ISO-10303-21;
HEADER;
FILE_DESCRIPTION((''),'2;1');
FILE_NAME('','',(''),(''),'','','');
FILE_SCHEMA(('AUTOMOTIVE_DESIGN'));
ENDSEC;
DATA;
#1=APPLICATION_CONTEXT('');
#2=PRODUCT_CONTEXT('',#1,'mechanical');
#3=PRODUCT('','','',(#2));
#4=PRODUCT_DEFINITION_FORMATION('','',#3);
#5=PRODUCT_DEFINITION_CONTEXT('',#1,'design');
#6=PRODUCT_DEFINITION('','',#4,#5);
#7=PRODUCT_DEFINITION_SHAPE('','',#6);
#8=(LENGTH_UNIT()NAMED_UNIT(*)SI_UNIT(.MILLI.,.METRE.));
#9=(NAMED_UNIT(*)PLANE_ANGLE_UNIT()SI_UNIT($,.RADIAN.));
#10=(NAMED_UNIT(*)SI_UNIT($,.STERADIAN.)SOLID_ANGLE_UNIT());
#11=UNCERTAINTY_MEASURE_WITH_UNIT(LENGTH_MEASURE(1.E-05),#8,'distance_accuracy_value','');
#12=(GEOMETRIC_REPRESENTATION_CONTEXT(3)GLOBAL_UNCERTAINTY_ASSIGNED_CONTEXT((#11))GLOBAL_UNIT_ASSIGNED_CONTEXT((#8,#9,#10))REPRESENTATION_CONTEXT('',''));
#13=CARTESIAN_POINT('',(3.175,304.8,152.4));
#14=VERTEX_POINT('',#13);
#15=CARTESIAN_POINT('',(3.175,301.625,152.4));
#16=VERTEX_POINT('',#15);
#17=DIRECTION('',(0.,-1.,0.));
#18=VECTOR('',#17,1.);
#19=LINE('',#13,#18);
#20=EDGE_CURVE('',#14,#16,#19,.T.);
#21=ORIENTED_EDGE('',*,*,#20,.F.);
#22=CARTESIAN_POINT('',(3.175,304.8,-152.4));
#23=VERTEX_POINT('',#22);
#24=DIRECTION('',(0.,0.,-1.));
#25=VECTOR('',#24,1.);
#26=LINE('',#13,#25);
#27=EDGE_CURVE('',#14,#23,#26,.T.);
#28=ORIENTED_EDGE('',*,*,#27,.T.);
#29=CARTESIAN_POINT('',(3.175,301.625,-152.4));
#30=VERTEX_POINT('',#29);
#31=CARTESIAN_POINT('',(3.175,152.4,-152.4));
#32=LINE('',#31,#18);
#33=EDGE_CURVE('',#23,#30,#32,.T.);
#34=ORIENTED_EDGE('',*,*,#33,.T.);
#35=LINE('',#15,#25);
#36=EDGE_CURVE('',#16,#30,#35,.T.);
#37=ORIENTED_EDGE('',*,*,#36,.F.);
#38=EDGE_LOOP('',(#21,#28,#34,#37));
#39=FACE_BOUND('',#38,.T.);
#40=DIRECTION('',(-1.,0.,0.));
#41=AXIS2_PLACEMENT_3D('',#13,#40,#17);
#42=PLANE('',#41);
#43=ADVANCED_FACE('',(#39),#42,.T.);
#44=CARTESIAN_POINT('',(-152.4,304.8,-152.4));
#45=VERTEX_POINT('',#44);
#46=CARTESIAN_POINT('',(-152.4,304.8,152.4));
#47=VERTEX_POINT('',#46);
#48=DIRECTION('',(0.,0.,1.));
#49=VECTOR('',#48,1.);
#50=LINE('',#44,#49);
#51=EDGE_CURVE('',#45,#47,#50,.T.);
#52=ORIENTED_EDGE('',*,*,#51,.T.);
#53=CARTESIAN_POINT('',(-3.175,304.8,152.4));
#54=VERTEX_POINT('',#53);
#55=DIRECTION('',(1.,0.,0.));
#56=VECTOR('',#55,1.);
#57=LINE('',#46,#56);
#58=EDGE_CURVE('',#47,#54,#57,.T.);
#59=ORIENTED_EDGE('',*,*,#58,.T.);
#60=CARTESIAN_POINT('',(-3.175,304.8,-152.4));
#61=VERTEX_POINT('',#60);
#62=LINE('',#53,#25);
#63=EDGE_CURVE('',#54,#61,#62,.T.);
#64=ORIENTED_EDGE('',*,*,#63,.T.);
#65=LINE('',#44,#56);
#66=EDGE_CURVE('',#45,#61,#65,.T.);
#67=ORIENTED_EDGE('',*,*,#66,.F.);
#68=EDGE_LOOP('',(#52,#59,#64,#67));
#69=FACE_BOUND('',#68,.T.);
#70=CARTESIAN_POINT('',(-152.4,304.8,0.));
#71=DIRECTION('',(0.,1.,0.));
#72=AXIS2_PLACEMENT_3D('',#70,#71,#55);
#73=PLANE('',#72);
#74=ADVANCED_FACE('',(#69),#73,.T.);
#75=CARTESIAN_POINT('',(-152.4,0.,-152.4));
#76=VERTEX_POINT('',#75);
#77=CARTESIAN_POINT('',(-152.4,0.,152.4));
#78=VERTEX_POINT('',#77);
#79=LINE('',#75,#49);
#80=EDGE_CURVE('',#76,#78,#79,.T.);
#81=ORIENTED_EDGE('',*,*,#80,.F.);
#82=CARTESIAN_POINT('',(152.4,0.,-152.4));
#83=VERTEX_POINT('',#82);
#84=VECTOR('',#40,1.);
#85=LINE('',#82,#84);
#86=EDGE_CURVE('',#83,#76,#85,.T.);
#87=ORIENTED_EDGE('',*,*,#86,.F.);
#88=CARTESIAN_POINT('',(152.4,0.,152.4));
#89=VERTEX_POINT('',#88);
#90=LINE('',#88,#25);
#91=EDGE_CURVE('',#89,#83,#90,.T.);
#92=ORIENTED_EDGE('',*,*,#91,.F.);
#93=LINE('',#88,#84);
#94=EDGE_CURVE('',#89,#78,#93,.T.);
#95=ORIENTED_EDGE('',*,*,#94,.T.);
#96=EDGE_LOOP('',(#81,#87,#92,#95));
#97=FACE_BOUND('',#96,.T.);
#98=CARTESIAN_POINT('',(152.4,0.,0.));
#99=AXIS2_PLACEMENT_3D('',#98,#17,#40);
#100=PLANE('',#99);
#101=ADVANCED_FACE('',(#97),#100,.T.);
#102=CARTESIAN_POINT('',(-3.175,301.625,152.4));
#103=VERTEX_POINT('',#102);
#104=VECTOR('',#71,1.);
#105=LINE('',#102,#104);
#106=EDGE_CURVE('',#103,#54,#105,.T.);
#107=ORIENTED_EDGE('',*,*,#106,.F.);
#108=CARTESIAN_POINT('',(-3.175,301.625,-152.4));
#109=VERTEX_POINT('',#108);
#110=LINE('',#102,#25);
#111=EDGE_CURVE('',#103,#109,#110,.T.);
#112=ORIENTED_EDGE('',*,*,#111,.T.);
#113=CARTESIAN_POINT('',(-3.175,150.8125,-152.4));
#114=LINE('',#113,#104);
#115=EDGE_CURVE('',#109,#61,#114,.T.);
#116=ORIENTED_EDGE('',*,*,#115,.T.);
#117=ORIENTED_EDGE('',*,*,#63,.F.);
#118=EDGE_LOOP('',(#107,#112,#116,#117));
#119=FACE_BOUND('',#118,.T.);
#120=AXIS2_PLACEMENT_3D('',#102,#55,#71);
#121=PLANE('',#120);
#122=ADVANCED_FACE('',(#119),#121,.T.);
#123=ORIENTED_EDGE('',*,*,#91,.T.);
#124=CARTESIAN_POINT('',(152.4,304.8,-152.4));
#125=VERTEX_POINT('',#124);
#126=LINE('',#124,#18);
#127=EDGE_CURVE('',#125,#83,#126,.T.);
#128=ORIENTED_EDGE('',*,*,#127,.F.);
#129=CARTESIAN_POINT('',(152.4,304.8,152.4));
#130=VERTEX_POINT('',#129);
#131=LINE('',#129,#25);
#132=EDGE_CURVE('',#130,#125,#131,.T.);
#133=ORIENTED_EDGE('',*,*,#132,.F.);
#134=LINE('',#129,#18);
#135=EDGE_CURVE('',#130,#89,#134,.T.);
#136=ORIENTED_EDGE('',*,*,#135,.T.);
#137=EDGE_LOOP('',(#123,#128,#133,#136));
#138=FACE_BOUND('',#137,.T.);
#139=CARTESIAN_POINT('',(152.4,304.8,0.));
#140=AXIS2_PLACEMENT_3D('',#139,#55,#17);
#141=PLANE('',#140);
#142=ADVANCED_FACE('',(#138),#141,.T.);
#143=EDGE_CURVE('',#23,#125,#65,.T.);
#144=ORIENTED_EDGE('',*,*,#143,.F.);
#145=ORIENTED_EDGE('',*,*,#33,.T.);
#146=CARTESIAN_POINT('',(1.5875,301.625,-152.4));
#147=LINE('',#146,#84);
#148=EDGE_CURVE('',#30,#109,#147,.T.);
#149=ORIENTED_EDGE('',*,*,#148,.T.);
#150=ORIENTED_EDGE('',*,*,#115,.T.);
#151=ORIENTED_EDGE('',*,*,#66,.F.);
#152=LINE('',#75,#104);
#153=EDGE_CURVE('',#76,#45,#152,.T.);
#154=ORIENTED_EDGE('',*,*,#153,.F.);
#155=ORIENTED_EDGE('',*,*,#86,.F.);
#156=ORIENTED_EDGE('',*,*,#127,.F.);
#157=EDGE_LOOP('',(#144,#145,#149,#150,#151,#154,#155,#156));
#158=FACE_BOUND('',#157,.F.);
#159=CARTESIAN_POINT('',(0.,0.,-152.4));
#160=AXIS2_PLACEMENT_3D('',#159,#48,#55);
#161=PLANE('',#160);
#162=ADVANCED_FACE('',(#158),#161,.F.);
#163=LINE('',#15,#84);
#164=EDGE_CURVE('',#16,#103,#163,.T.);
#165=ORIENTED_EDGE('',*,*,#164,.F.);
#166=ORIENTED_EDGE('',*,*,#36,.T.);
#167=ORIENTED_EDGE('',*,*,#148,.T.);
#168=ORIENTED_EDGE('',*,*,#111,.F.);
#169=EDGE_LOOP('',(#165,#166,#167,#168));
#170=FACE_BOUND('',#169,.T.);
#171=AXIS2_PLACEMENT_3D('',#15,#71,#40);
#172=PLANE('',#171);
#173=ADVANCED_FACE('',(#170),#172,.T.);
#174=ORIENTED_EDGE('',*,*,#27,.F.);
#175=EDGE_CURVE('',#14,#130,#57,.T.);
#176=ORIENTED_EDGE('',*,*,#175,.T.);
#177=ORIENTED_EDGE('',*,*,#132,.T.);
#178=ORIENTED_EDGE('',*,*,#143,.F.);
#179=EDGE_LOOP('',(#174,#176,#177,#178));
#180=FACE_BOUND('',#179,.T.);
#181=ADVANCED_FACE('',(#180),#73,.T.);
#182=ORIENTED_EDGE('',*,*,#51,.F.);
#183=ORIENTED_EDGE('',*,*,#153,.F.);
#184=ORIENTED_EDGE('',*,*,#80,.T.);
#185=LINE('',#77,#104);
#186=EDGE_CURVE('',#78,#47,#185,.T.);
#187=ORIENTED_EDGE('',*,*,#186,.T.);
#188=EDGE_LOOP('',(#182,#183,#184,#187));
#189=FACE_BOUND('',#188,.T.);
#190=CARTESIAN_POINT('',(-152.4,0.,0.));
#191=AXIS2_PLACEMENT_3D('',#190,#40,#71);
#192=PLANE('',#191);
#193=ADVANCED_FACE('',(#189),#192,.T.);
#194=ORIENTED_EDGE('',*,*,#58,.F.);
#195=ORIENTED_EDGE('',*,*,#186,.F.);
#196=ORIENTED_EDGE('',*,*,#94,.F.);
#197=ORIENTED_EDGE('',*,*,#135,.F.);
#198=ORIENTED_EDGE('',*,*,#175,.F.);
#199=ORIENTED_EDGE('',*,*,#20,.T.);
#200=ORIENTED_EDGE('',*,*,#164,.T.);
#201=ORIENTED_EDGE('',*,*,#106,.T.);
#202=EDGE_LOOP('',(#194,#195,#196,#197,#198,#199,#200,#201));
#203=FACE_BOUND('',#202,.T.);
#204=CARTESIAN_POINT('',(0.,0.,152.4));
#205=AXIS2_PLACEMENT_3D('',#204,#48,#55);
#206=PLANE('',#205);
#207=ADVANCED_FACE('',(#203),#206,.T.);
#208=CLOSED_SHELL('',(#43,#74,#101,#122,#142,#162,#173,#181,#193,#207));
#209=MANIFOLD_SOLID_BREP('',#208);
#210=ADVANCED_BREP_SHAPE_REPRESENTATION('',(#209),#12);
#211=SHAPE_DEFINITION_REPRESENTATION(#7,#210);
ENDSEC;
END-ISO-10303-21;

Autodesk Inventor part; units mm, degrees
ref_plane "YZ Plane" through (0, 0, 0) normal (1, 0, 0) x (0, 1, 0)
ref_plane "XZ Plane" through (0, 0, 0) normal (0, 1, 0) x (-1, 0, 0)
ref_plane "XY Plane" through (0, 0, 0) normal (0, 0, 1) x (1, 0, 0)
sketch "Sketch1" plane through (0, 0, 0) normal (0, 0, 1) x (1, 0, 0)
  line L0 (-152.4, 304.8) -> (152.4, 304.8)
  line L1 (152.4, 304.8) -> (152.4, 0)
  line L2 (152.4, 0) -> (-152.4, 0)
  line L3 (-152.4, 0) -> (-152.4, 304.8)
  point P0 (0, 0)
  point P1 (0, 0)
extrude "Extrusion1" add sketch "Sketch1" along normal mid plane 304.8
sketch "Sketch2" plane through (0, 0, 152.4) normal (0, 0, 1) x (1, 0, 0)
  line L0 (-152.4, 304.8) -> (152.4, 304.8) projected
  line L1 (-3.175, 304.8) -> (3.175, 304.8)
  line L2 (3.175, 304.8) -> (3.175, 301.625)
  line L3 (3.175, 301.625) -> (-3.175, 301.625)
  line L4 (-3.175, 301.625) -> (-3.175, 304.8)
  point P0 (0, 0)
  point P1 (0, 304.8)
  dimension "d4" = 3.175
  dimension "d5" = 6.35
extrude "Extrusion2" cut sketch "Sketch2" against normal through all
sketch "Sketch3" plane through (0, 0, 152.4) normal (0, 0, 1) x (1, 0, 0)
  line L0 (-152.4, 0) -> (-152.4, 304.8) projected
  line L1 (152.4, 0) -> (-152.4, 0) projected
  line L2 (-127, 25.4) -> (-50.8, 25.4)
  line L3 (-50.8, 25.4) -> (-50.8, 101.6)
  line L4 (-50.8, 101.6) -> (-127, 101.6)
  line L5 (-127, 101.6) -> (-127, 25.4)
  line L6 (-123.825, 98.425) -> (-53.975, 98.425)
  line L7 (-53.975, 98.425) -> (-53.975, 28.575)
  line L8 (-53.975, 28.575) -> (-123.825, 28.575)
  line L9 (-123.825, 28.575) -> (-123.825, 98.425)
  line L10 (-38.1, 25.4) -> (38.1, 25.4)
  line L11 (38.1, 25.4) -> (38.1, 101.6)
  line L12 (38.1, 101.6) -> (-38.1, 101.6)
  line L13 (-38.1, 101.6) -> (-38.1, 25.4)
  line L14 (-34.925, 98.425) -> (34.925, 98.425)
  line L15 (34.925, 98.425) -> (34.925, 28.575)
  line L16 (34.925, 28.575) -> (-34.925, 28.575)
  line L17 (-34.925, 28.575) -> (-34.925, 98.425)
  line L18 (-127, 114.3) -> (-50.8, 114.3)
  line L19 (-50.8, 114.3) -> (-50.8, 190.5)
  line L20 (-50.8, 190.5) -> (-127, 190.5)
  line L21 (-127, 190.5) -> (-127, 114.3)
  line L22 (-123.825, 187.325) -> (-53.975, 187.325)
  line L23 (-53.975, 187.325) -> (-53.975, 117.475)
  line L24 (-53.975, 117.475) -> (-123.825, 117.475)
  line L25 (-123.825, 117.475) -> (-123.825, 187.325)
  line L26 (-38.1, 114.3) -> (38.1, 114.3)
  line L27 (38.1, 114.3) -> (38.1, 190.5)
  line L28 (38.1, 190.5) -> (-38.1, 190.5)
  line L29 (-38.1, 190.5) -> (-38.1, 114.3)
  line L30 (-34.925, 187.325) -> (34.925, 187.325)
  line L31 (34.925, 187.325) -> (34.925, 117.475)
  line L32 (34.925, 117.475) -> (-34.925, 117.475)
  line L33 (-34.925, 117.475) -> (-34.925, 187.325)
  point P0 (0, 0)
  dimension "d8" = 76.2
  dimension "d9" = 25.4
  dimension "d10" = 25.4
  dimension "d11" = 3.175
  dimension "d14" = 88.9
  dimension "d17" = 88.9
split_face "Split1"
split_face "Split2"
split_face "Split3"
split_face "Split4"
split_face "Split5"
split_face "Split6"
split_face "Split7"
split_face "Split8"
sketch "Sketch4" plane through (-123.825, 98.425, 152.4) normal (0, 0, 1) x (1, 0, 0)
  line L0 (0, 0) -> (69.85, 0) projected
  line L1 (0, -69.85) -> (0, 0) projected
  line L2 (69.85, -69.85) -> (0, -69.85) projected
  line L3 (19.0891, -57.15) -> (50.7609, -57.15)
  line L4 (50.7609, -57.15) -> (50.7609, -50.8)
  line L5 (19.0891, -50.8) -> (19.0891, -57.15)
  line L6 (38.1, -50.8) -> (38.1, -34.697)
  line L7 (31.75, -34.697) -> (31.75, -50.8)
  line L8 (19.6575, -12.7) -> (16.6521, -18.8843)
  line L9 (16.6521, -18.8843) -> (20.9342, -18.8843)
  line L10 (20.9342, -18.8843) -> (17.3368, -26.287)
  line L11 (22.15, -12.7) -> (20.3175, -16.4708)
  line L12 (20.3175, -16.4708) -> (24.6183, -16.4708)
  line L13 (24.6183, -16.4708) -> (18.9446, -28.1459)
  line L14 (12.7, -12.7) -> (19.6575, -12.7)
  line L15 (22.15, -12.7) -> (57.15, -12.7)
  arc A0 (12.7, -12.7) -> (17.3368, -26.287) centre (34.925, -12.7) ccw
  arc A1 (18.9446, -28.1459) -> (31.75, -34.697) centre (34.925, -12.7) ccw
  arc A2 (38.1, -34.697) -> (57.15, -12.7) centre (34.925, -12.7) ccw
  line L16 (50.7609, -50.8) -> (38.1, -50.8)
  line L17 (31.75, -50.8) -> (19.0891, -50.8)
  point P0 (123.825, -98.425)
  point P1 (34.925, -50.8)
  point P2 (34.925, -29.1715)
  point P3 (34.925, 0)
  dimension "d20" = 12.7
  dimension "d21" = 6.35
  dimension "d22" = 6.35
  dimension "d24" = 12.7
split_face "Split9"
split_face "Split10"
sketch "Sketch5" plane through (-34.925, 98.425, 152.4) normal (0, 0, 1) x (1, 0, 0)
  line L0 (69.85, 0) -> (69.85, -69.85) projected
  line L1 (0, 0) -> (69.85, 0) projected
  line L2 (0, -69.85) -> (0, 0) projected
  line L3 (69.85, -69.85) -> (0, -69.85) projected
  line L4 (57.15, -12.7) -> (57.15, -57.15) construction
  line L5 (57.15, -57.15) -> (12.7, -57.15) construction
  line L6 (12.7, -57.15) -> (12.7, -12.7) construction
  line L7 (12.7, -12.7) -> (57.15, -12.7) construction
  line L8 (36.0188, -31.0952) -> (36.0188, -51.4628)
  line L9 (33.8312, -51.4628) -> (33.8312, -31.0952)
  arc A0 (24.6443, -51.4628) -> (36.0188, -51.4628) centre (30.3316, -51.4628) ccw
  arc A1 (26.8319, -51.4628) -> (33.8312, -51.4628) centre (30.3316, -51.4628) ccw
  line L10 (24.6443, -51.4628) -> (26.8319, -51.4628)
  line L11 (36.0188, -13.8321) -> (36.0188, -12.7)
  line L12 (36.0188, -12.7) -> (33.8312, -12.7)
  line L13 (33.8312, -12.7) -> (33.8312, -13.8301)
  arc A2 (23.1675, -30.5813) -> (12.7, -30.0146) centre (17.5638, -37.131) ccw
  arc A3 (33.8312, -30.1527) -> (23.1675, -30.5813) centre (28.7712, -37.131) ccw
  arc A4 (46.5876, -30.5012) -> (36.0188, -30.1527) centre (41.0788, -37.131) ccw
  arc A5 (57.15, -30.1481) -> (46.5876, -30.5012) centre (52.0963, -37.131) ccw
  line L14 (36.0188, -31.0952) -> (36.0188, -30.1527)
  line L15 (33.8312, -31.0952) -> (33.8312, -30.1527)
  arc A6 (57.15, -30.1481) -> (36.0188, -13.8321) centre (34.9039, -37.1178) ccw
  arc A7 (33.8312, -13.8301) -> (12.7, -30.0146) centre (34.9039, -37.1178) ccw
  point P0 (34.925, -98.425)
  point P1 (34.925, -31.0952)
  point P2 (34.925, -31.0952)
  point P3 (34.925, -12.7)
  dimension "d25" = 12.7
split_face "Split11"
sketch "Sketch6" plane through (-34.925, 187.325, 152.4) normal (0, 0, 1) x (1, 0, 0)
  line L0 (69.85, 0) -> (69.85, -69.85) projected
  line L1 (0, 0) -> (69.85, 0) projected
  line L2 (0, -69.85) -> (0, 0) projected
  line L3 (69.85, -69.85) -> (0, -69.85) projected
  line L4 (57.15, -12.7) -> (57.15, -57.15) construction
  line L5 (57.15, -57.15) -> (12.7, -57.15)
  line L6 (12.7, -57.15) -> (12.7, -12.7) construction
  line L7 (12.7, -12.7) -> (57.15, -12.7) construction
  line L8 (12.7, -50.8) -> (57.15, -50.8)
  line L9 (22.6976, -12.7) -> (17.5193, -23.9944)
  line L10 (27.8758, -23.9944) -> (22.6976, -12.7)
  line L11 (25.8726, -23.9944) -> (25.8726, -48.0363)
  line L12 (25.8726, -48.0363) -> (19.5226, -48.0363)
  line L13 (19.5226, -48.0363) -> (19.5226, -23.9944)
  line L14 (34.925, -12.7) -> (34.925, -7.7199) construction
  line L15 (47.1524, -12.7) -> (52.3307, -23.9944)
  line L16 (41.9742, -23.9944) -> (47.1524, -12.7)
  line L17 (43.9774, -23.9944) -> (43.9774, -48.0363)
  line L18 (43.9774, -48.0363) -> (50.3274, -48.0363)
  line L19 (50.3274, -48.0363) -> (50.3274, -23.9944)
  line L20 (12.7, -50.8) -> (12.7, -57.15)
  line L21 (57.15, -50.8) -> (57.15, -57.15)
  line L22 (17.5193, -23.9944) -> (19.5226, -23.9944)
  line L23 (25.8726, -23.9944) -> (27.8758, -23.9944)
  line L24 (52.3307, -23.9944) -> (50.3274, -23.9944)
  line L25 (43.9774, -23.9944) -> (41.9742, -23.9944)
  point P0 (34.925, -187.325)
  point P1 (22.6976, -23.9944)
  point P2 (47.1524, -23.9944)
  dimension "d26" = 12.7
  dimension "d27" = 6.35
  dimension "d28" = 6.35
split_face "Split12"
split_face "Split13"
split_face "Split14"
sketch "Sketch7" plane through (-123.825, 187.325, 152.4) normal (0, 0, 1) x (1, 0, 0)
  line L0 (0, -69.85) -> (69.85, -69.85) projected
  line L1 (12.7, -12.7) -> (57.15, -12.7) construction
  line L2 (57.15, -57.15) -> (12.7, -57.15) construction
  line L3 (22.6688, -57.15) -> (22.6688, -52.8524)
  arc A0 (22.6688, -52.8524) -> (20.3647, -47.1054) centre (14.3497, -52.8524) ccw
  line L4 (20.3647, -47.1054) -> (15.1508, -41.6484)
  arc A1 (12.7, -34.925) -> (15.1508, -41.6484) centre (21.5956, -35.4908) ccw
  line L5 (15.875, -19.6032) -> (15.875, -31.6397)
  line L6 (17.6337, -36.0264) -> (26.3364, -45.1349)
  arc A2 (26.3364, -45.1349) -> (28.0331, -43.5138) centre (27.1847, -44.3243) ccw
  line L7 (28.0331, -43.5138) -> (21.521, -36.698)
  arc A3 (23.8166, -34.5047) -> (21.521, -36.698) centre (22.6688, -35.6013) ccw
  line L8 (23.8166, -34.5047) -> (30.3287, -41.3205)
  arc A4 (31.533, -44.3243) -> (30.3287, -41.3205) centre (27.1847, -44.3243) ccw
  line L9 (31.533, -44.3243) -> (31.533, -57.15)
  line L10 (34.925, -12.7) -> (34.925, -57.15) construction
  arc A5 (15.875, -19.6032) -> (12.7, -19.6032) centre (14.2875, -19.6032) ccw
  arc A6 (15.875, -31.6397) -> (17.6337, -36.0264) centre (22.225, -31.6397) ccw
  line L11 (12.7, -34.925) -> (12.7, -19.6032)
  line L12 (47.1812, -57.15) -> (47.1812, -52.8524)
  arc A7 (49.4853, -47.1054) -> (47.1812, -52.8524) centre (55.5003, -52.8524) ccw
  line L13 (49.4853, -47.1054) -> (54.6992, -41.6484)
  arc A8 (54.6992, -41.6484) -> (57.15, -34.925) centre (48.2544, -35.4908) ccw
  line L14 (53.975, -19.6032) -> (53.975, -31.6397)
  line L15 (52.2163, -36.0264) -> (43.5136, -45.1349)
  arc A9 (41.8169, -43.5138) -> (43.5136, -45.1349) centre (42.6653, -44.3243) ccw
  line L16 (41.8169, -43.5138) -> (48.329, -36.698)
  arc A10 (48.329, -36.698) -> (46.0334, -34.5047) centre (47.1812, -35.6013) ccw
  line L17 (46.0334, -34.5047) -> (39.5213, -41.3205)
  arc A11 (39.5213, -41.3205) -> (38.317, -44.3243) centre (42.6653, -44.3243) ccw
  line L18 (38.317, -44.3243) -> (38.317, -57.15)
  arc A12 (57.15, -19.6032) -> (53.975, -19.6032) centre (55.5625, -19.6032) ccw
  arc A13 (52.2163, -36.0264) -> (53.975, -31.6397) centre (47.625, -31.6397) ccw
  line L19 (38.317, -57.15) -> (47.1812, -57.15)
  line L20 (57.15, -19.6032) -> (57.15, -34.925)
  line L21 (34.925, -12.7) -> (26.384, -18.361)
  line L22 (26.384, -18.361) -> (34.925, -24.0221)
  line L23 (34.925, -24.0221) -> (43.466, -18.361)
  line L24 (43.466, -18.361) -> (34.925, -12.7)
  line L25 (26.5258, -20.3104) -> (33.8787, -25.1839)
  line L26 (33.8787, -25.1839) -> (33.8787, -33.5217)
  line L27 (33.8787, -33.5217) -> (26.5258, -28.6482)
  line L28 (26.5258, -28.6482) -> (26.5258, -20.3104)
  line L29 (43.3242, -20.3104) -> (35.9713, -25.1839)
  line L30 (35.9713, -25.1839) -> (35.9713, -33.5217)
  line L31 (35.9713, -33.5217) -> (43.3242, -28.6482)
  line L32 (43.3242, -28.6482) -> (43.3242, -20.3104)
  line L33 (22.6688, -57.15) -> (31.533, -57.15)
  line L34 (57.15, -12.7) -> (57.15, -34.925) construction
  line L35 (57.15, -36.0566) -> (57.15, -57.15) construction
  line L36 (12.7, -57.15) -> (12.7, -36.0566) construction
  line L37 (12.7, -34.925) -> (12.7, -12.7) construction
  point P0 (123.825, -187.325)
  dimension "d30" = 12.7
  dimension "d32" = 3.175
  dimension "d33" = 6.35
split_face "Split15"
split_face "Split16"
split_face "Split17"
split_face "Split18"
split_face "Split19"
sketch "Sketch8" plane through (-152.4, 304.8, -152.4) normal (0, 1, 0) x (1, 0, 0)
  line L0 (149.225, -304.8) -> (149.225, 0) projected
  line L1 (149.225, 0) -> (0, 0) projected
  line L2 (0, 0) -> (0, -304.8) projected
  line L3 (0, -304.8) -> (149.225, -304.8) projected
  line L4 (0, 0) -> (304.8, -304.8)
  point P0 (152.4, -152.4)
sketch "Sketch9" plane through (0, 0, -152.4) normal (0, 0, -1) x (-1, 0, 0)
  line L0 (-3.175, 301.625) -> (-3.175, 304.8) projected
  line L1 (-152.4, 304.8) -> (-3.175, 304.8) projected
  line L2 (-152.4, 0) -> (-152.4, 304.8) projected
  line L3 (152.4, 0) -> (-152.4, 0) projected
  line L4 (152.4, 304.8) -> (152.4, 0) projected
  line L5 (3.175, 304.8) -> (152.4, 304.8) projected
  line L6 (3.175, 304.8) -> (3.175, 301.625) projected
  line L7 (3.175, 301.625) -> (-3.175, 301.625) projected
  line L8 (152.4, 304.8) -> (-152.4, 0)
  point P0 (0, 0)
  point P1 (0, 152.4)
sketch "Sketch10" plane through (-152.4, 0, 152.4) normal (0, 0, 1) x (1, 0, 0)
  line L0 (101.6, 25.4) -> (101.6, 101.6) projected
  line L1 (25.4, 25.4) -> (101.6, 25.4) projected
  line L2 (25.4, 101.6) -> (25.4, 25.4) projected
  line L3 (101.6, 101.6) -> (25.4, 101.6) projected
  line L4 (155.575, 304.8) -> (155.575, 301.625) projected
  line L5 (155.575, 301.625) -> (149.225, 301.625) projected
  line L6 (149.225, 301.625) -> (149.225, 304.8) projected
  line L7 (0, 304.8) -> (149.225, 304.8) projected
  line L8 (0, 0) -> (0, 304.8) projected
  line L9 (304.8, 0) -> (0, 0) projected
  line L10 (304.8, 304.8) -> (304.8, 0) projected
  line L11 (155.575, 304.8) -> (304.8, 304.8) projected
  line L12 (101.6, 190.5) -> (101.6, 114.3) projected
  line L13 (101.6, 114.3) -> (25.4, 114.3) projected
  line L14 (25.4, 114.3) -> (25.4, 190.5) projected
  line L15 (25.4, 190.5) -> (101.6, 190.5) projected
  line L16 (190.5, 114.3) -> (190.5, 190.5) projected
  line L17 (114.3, 114.3) -> (190.5, 114.3) projected
  line L18 (114.3, 190.5) -> (114.3, 114.3) projected
  line L19 (190.5, 190.5) -> (114.3, 190.5) projected
  line L20 (190.5, 25.4) -> (190.5, 101.6) projected
  line L21 (114.3, 25.4) -> (190.5, 25.4) projected
  line L22 (114.3, 101.6) -> (114.3, 25.4) projected
  line L23 (190.5, 101.6) -> (114.3, 101.6) projected
  line L24 (0, 304.8) -> (304.8, 0)
  point P0 (152.4, 0)
  point P1 (152.4, 152.4)
equation "\"d28\" = d27"
equation "\"d32\" = d31"
equation "\"d31\" = 3.175"
properties part number "Box - Package"
